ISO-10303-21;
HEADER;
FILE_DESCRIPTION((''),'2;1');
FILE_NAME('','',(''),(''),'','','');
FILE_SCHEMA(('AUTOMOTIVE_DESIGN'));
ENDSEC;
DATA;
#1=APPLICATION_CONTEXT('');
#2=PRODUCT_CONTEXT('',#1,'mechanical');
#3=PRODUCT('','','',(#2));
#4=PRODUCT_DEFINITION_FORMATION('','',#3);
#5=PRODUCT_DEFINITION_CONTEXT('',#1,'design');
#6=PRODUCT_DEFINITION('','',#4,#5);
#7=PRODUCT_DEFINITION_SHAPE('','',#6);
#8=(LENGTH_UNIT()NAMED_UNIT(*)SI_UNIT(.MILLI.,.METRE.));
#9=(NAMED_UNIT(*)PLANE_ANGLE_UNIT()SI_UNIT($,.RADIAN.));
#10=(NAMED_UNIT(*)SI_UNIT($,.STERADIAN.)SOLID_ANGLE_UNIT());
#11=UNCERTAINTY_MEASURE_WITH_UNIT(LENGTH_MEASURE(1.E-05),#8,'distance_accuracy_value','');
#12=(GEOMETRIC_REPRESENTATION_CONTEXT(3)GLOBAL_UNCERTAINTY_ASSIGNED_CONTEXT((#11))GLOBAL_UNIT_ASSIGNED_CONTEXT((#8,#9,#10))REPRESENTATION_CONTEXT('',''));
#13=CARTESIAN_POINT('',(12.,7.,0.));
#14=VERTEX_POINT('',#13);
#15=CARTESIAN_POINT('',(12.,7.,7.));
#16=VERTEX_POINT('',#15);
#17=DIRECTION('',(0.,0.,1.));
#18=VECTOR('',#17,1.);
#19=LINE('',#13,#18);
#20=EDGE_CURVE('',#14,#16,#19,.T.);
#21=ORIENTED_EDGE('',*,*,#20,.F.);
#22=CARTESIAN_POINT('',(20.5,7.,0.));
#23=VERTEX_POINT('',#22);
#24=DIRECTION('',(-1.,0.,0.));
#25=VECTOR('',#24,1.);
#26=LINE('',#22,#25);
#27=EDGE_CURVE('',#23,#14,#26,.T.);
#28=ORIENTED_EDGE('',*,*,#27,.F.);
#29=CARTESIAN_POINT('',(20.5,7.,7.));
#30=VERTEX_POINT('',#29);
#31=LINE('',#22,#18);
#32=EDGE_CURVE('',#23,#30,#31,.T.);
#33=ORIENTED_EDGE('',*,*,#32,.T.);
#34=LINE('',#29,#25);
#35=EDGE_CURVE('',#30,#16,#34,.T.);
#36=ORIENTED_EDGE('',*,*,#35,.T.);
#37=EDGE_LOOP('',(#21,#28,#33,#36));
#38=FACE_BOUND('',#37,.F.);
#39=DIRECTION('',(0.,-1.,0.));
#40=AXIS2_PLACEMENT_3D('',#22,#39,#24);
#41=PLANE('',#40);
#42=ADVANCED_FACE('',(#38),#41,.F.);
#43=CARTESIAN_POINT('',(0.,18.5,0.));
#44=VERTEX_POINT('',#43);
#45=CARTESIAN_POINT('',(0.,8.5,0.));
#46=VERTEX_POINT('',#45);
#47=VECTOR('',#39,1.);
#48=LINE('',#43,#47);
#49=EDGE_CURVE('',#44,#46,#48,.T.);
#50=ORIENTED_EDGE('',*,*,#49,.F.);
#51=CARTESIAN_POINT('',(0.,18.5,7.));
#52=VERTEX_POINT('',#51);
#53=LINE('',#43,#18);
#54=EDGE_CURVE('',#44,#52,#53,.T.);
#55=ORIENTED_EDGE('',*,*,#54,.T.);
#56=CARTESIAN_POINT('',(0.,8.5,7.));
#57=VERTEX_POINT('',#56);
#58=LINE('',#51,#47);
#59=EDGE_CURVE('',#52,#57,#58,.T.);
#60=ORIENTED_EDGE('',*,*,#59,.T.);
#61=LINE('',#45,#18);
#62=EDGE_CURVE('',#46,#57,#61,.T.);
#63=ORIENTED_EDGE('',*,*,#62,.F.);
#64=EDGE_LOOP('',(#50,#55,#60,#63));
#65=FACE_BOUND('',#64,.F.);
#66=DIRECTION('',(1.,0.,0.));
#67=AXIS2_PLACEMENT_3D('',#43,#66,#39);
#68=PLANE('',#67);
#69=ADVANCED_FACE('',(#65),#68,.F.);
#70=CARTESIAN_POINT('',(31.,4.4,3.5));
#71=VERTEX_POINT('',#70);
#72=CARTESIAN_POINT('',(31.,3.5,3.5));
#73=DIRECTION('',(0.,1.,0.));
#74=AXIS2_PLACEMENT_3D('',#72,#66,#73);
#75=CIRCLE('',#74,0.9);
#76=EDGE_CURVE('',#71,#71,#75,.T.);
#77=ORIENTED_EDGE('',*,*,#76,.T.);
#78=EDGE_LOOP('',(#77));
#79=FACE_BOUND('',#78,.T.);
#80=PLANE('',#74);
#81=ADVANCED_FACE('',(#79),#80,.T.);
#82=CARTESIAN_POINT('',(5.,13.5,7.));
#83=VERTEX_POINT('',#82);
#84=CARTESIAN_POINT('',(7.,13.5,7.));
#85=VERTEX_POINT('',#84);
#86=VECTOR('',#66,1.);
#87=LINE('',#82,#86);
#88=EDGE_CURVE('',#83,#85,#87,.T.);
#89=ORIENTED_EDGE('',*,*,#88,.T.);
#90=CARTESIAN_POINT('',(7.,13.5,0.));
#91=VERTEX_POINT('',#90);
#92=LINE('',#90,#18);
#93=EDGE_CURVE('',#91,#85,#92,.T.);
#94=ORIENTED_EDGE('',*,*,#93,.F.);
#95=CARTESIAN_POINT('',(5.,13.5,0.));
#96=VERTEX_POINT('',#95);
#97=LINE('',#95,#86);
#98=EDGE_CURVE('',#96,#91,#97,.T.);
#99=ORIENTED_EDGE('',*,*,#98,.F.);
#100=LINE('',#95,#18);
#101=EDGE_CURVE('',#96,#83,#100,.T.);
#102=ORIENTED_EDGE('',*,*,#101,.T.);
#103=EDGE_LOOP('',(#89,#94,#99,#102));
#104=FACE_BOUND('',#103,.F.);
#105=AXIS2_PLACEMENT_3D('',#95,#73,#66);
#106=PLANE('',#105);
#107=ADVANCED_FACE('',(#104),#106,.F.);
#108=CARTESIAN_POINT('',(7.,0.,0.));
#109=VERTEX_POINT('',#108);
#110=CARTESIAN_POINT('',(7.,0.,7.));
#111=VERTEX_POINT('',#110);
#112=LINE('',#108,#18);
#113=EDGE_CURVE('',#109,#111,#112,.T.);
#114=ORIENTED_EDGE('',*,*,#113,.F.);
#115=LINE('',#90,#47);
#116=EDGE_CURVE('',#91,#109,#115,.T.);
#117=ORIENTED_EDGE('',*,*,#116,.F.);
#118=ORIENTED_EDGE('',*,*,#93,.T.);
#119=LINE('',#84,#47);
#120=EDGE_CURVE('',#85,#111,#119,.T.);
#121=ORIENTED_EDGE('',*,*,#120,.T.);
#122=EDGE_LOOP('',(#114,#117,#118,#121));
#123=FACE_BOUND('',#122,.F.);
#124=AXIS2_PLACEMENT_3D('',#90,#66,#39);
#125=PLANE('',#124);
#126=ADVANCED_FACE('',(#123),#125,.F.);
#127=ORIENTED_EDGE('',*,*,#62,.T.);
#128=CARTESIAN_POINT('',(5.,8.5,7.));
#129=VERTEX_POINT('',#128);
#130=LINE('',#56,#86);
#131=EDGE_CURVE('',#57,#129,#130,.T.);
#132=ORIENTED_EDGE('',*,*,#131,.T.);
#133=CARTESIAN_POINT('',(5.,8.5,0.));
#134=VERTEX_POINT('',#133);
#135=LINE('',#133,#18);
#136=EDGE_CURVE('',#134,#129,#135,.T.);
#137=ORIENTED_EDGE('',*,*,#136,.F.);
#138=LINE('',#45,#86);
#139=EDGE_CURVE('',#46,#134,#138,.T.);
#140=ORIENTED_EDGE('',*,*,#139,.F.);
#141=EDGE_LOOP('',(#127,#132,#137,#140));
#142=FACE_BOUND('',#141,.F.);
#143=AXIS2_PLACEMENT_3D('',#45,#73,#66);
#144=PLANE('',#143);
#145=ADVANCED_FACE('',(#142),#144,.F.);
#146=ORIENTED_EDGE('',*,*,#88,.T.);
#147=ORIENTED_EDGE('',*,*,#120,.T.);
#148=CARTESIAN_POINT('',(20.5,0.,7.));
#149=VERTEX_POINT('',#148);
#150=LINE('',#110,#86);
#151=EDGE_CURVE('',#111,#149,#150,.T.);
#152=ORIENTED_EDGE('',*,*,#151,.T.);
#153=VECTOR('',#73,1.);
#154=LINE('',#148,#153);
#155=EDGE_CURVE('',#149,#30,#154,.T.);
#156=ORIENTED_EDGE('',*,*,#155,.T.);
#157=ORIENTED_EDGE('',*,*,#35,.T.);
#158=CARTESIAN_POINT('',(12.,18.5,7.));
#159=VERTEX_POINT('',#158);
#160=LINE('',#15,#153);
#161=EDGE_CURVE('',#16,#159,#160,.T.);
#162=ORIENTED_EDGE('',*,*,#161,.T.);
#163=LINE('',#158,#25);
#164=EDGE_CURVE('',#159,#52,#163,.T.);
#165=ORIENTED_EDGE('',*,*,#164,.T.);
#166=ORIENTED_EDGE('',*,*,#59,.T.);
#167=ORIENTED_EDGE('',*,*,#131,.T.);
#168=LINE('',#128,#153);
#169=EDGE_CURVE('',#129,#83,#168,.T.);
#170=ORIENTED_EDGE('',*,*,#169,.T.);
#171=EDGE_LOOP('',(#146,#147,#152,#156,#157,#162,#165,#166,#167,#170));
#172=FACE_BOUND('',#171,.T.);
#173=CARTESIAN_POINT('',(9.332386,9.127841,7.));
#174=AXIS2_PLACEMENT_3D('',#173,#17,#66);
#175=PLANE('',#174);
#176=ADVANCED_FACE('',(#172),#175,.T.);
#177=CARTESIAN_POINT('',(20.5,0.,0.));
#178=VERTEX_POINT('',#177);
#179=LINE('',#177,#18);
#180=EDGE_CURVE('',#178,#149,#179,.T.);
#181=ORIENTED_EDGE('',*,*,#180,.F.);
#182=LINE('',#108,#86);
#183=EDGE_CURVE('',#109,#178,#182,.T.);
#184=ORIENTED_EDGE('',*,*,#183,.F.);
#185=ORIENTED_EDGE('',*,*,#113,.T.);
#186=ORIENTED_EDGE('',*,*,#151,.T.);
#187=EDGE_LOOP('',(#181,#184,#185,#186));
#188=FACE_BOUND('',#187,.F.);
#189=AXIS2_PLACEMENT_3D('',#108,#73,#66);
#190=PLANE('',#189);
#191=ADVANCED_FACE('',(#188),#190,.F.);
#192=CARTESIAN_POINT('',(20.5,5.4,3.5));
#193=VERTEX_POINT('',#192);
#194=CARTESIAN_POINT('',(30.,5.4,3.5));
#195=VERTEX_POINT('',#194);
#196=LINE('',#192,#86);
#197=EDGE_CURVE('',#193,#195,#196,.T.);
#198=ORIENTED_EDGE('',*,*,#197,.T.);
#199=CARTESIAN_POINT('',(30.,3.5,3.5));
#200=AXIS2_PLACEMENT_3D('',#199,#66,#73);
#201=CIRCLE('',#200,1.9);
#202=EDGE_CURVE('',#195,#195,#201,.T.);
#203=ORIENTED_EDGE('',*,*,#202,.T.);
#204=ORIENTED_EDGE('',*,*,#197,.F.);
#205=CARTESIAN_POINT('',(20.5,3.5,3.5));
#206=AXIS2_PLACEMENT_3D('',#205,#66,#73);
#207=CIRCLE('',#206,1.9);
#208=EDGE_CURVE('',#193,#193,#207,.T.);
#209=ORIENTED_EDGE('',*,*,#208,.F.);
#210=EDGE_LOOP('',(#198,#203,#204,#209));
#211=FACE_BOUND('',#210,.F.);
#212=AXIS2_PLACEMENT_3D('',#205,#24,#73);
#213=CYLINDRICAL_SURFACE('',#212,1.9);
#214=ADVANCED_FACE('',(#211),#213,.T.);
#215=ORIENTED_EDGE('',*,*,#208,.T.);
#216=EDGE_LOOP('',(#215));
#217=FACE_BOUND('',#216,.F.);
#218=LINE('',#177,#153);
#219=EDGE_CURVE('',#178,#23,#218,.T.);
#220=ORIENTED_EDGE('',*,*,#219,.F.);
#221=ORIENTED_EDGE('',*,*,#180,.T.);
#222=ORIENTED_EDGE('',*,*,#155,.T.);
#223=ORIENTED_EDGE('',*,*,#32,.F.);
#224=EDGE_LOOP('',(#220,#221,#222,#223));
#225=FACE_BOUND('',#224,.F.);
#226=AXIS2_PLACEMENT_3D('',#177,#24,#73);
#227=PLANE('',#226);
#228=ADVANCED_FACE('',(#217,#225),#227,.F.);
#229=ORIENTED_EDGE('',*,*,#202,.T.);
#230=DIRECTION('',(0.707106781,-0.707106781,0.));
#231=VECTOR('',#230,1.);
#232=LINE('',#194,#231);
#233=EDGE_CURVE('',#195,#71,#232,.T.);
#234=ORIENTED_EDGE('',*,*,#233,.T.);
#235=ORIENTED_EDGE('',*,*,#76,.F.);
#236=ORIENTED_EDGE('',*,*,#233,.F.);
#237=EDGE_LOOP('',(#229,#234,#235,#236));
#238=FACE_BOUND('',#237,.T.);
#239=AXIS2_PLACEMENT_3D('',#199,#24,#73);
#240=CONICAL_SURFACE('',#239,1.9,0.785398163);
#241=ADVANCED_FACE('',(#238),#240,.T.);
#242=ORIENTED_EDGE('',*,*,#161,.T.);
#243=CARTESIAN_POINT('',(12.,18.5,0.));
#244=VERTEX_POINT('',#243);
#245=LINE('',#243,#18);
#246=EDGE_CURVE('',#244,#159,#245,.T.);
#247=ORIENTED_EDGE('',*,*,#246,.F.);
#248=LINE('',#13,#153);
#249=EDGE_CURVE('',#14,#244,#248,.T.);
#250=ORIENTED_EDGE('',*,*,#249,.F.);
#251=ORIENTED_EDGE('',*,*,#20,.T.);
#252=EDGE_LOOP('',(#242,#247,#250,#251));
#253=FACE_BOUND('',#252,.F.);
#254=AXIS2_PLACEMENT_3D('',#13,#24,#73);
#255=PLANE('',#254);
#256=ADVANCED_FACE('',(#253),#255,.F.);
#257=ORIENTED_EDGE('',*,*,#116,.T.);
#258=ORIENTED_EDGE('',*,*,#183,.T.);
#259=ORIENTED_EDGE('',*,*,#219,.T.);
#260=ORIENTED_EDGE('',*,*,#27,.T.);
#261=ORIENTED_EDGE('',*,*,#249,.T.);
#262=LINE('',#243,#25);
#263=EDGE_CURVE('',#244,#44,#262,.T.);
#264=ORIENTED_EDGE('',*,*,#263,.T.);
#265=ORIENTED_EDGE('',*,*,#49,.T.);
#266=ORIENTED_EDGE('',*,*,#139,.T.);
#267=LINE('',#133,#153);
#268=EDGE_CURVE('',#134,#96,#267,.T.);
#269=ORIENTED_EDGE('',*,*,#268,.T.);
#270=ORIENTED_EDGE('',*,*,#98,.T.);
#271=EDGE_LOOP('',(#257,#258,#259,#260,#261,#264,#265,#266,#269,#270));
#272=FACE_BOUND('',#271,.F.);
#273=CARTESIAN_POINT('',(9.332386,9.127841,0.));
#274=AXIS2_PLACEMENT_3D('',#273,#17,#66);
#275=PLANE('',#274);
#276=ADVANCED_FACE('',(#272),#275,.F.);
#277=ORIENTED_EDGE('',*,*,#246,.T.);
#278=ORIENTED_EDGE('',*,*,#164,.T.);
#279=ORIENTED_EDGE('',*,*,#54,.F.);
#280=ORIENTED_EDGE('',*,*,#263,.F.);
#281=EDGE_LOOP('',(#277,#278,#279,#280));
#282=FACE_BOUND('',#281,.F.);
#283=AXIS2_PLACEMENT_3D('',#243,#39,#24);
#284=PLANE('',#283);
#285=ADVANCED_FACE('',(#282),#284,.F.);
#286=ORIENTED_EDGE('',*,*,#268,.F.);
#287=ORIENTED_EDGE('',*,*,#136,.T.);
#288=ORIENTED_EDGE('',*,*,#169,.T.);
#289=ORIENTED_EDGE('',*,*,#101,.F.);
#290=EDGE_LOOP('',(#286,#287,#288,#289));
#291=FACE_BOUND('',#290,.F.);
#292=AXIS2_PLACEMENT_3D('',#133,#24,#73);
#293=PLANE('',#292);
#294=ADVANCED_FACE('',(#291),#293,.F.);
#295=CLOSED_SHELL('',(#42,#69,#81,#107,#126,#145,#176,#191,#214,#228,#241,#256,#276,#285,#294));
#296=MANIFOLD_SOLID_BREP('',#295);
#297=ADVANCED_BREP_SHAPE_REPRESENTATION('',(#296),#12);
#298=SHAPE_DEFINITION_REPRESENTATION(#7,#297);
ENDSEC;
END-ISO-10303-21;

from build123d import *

# Parameters (mm, degrees)
F1_DEPTH = 7
F2_R     = 1.9
F3_DEPTH = 10.5
F4_SIZE  = 1


# Not quite as in the source:
# - a feature names something its author has since deleted; it is built from what else it names


with BuildPart() as f1:
    # F0 (on Top) → F1 (new body)
    with BuildSketch(Plane.XY):
        Polygon((0, 18.5), (0, 8.5), (5, 8.5), (5, 13.5), (7, 13.5), (7, 0), (20.5, 0), (20.5, 7), (12, 7), (12, 18.5), align=None)
    extrude(amount=F1_DEPTH)

    # F2 (on face) → F3 (join)
    with BuildSketch(Plane.YZ.offset(20.5)):
        with Locations((3.5, 3.5)):
            Circle(F2_R)
    extrude(amount=F3_DEPTH)

    # F4
    f4_edges = [f1.edges().sort_by_distance(p)[0] for p in [
        (31, 1.6, 3.5),
    ]]
    chamfer(f4_edges, length=F4_SIZE)


solid = f1.part
